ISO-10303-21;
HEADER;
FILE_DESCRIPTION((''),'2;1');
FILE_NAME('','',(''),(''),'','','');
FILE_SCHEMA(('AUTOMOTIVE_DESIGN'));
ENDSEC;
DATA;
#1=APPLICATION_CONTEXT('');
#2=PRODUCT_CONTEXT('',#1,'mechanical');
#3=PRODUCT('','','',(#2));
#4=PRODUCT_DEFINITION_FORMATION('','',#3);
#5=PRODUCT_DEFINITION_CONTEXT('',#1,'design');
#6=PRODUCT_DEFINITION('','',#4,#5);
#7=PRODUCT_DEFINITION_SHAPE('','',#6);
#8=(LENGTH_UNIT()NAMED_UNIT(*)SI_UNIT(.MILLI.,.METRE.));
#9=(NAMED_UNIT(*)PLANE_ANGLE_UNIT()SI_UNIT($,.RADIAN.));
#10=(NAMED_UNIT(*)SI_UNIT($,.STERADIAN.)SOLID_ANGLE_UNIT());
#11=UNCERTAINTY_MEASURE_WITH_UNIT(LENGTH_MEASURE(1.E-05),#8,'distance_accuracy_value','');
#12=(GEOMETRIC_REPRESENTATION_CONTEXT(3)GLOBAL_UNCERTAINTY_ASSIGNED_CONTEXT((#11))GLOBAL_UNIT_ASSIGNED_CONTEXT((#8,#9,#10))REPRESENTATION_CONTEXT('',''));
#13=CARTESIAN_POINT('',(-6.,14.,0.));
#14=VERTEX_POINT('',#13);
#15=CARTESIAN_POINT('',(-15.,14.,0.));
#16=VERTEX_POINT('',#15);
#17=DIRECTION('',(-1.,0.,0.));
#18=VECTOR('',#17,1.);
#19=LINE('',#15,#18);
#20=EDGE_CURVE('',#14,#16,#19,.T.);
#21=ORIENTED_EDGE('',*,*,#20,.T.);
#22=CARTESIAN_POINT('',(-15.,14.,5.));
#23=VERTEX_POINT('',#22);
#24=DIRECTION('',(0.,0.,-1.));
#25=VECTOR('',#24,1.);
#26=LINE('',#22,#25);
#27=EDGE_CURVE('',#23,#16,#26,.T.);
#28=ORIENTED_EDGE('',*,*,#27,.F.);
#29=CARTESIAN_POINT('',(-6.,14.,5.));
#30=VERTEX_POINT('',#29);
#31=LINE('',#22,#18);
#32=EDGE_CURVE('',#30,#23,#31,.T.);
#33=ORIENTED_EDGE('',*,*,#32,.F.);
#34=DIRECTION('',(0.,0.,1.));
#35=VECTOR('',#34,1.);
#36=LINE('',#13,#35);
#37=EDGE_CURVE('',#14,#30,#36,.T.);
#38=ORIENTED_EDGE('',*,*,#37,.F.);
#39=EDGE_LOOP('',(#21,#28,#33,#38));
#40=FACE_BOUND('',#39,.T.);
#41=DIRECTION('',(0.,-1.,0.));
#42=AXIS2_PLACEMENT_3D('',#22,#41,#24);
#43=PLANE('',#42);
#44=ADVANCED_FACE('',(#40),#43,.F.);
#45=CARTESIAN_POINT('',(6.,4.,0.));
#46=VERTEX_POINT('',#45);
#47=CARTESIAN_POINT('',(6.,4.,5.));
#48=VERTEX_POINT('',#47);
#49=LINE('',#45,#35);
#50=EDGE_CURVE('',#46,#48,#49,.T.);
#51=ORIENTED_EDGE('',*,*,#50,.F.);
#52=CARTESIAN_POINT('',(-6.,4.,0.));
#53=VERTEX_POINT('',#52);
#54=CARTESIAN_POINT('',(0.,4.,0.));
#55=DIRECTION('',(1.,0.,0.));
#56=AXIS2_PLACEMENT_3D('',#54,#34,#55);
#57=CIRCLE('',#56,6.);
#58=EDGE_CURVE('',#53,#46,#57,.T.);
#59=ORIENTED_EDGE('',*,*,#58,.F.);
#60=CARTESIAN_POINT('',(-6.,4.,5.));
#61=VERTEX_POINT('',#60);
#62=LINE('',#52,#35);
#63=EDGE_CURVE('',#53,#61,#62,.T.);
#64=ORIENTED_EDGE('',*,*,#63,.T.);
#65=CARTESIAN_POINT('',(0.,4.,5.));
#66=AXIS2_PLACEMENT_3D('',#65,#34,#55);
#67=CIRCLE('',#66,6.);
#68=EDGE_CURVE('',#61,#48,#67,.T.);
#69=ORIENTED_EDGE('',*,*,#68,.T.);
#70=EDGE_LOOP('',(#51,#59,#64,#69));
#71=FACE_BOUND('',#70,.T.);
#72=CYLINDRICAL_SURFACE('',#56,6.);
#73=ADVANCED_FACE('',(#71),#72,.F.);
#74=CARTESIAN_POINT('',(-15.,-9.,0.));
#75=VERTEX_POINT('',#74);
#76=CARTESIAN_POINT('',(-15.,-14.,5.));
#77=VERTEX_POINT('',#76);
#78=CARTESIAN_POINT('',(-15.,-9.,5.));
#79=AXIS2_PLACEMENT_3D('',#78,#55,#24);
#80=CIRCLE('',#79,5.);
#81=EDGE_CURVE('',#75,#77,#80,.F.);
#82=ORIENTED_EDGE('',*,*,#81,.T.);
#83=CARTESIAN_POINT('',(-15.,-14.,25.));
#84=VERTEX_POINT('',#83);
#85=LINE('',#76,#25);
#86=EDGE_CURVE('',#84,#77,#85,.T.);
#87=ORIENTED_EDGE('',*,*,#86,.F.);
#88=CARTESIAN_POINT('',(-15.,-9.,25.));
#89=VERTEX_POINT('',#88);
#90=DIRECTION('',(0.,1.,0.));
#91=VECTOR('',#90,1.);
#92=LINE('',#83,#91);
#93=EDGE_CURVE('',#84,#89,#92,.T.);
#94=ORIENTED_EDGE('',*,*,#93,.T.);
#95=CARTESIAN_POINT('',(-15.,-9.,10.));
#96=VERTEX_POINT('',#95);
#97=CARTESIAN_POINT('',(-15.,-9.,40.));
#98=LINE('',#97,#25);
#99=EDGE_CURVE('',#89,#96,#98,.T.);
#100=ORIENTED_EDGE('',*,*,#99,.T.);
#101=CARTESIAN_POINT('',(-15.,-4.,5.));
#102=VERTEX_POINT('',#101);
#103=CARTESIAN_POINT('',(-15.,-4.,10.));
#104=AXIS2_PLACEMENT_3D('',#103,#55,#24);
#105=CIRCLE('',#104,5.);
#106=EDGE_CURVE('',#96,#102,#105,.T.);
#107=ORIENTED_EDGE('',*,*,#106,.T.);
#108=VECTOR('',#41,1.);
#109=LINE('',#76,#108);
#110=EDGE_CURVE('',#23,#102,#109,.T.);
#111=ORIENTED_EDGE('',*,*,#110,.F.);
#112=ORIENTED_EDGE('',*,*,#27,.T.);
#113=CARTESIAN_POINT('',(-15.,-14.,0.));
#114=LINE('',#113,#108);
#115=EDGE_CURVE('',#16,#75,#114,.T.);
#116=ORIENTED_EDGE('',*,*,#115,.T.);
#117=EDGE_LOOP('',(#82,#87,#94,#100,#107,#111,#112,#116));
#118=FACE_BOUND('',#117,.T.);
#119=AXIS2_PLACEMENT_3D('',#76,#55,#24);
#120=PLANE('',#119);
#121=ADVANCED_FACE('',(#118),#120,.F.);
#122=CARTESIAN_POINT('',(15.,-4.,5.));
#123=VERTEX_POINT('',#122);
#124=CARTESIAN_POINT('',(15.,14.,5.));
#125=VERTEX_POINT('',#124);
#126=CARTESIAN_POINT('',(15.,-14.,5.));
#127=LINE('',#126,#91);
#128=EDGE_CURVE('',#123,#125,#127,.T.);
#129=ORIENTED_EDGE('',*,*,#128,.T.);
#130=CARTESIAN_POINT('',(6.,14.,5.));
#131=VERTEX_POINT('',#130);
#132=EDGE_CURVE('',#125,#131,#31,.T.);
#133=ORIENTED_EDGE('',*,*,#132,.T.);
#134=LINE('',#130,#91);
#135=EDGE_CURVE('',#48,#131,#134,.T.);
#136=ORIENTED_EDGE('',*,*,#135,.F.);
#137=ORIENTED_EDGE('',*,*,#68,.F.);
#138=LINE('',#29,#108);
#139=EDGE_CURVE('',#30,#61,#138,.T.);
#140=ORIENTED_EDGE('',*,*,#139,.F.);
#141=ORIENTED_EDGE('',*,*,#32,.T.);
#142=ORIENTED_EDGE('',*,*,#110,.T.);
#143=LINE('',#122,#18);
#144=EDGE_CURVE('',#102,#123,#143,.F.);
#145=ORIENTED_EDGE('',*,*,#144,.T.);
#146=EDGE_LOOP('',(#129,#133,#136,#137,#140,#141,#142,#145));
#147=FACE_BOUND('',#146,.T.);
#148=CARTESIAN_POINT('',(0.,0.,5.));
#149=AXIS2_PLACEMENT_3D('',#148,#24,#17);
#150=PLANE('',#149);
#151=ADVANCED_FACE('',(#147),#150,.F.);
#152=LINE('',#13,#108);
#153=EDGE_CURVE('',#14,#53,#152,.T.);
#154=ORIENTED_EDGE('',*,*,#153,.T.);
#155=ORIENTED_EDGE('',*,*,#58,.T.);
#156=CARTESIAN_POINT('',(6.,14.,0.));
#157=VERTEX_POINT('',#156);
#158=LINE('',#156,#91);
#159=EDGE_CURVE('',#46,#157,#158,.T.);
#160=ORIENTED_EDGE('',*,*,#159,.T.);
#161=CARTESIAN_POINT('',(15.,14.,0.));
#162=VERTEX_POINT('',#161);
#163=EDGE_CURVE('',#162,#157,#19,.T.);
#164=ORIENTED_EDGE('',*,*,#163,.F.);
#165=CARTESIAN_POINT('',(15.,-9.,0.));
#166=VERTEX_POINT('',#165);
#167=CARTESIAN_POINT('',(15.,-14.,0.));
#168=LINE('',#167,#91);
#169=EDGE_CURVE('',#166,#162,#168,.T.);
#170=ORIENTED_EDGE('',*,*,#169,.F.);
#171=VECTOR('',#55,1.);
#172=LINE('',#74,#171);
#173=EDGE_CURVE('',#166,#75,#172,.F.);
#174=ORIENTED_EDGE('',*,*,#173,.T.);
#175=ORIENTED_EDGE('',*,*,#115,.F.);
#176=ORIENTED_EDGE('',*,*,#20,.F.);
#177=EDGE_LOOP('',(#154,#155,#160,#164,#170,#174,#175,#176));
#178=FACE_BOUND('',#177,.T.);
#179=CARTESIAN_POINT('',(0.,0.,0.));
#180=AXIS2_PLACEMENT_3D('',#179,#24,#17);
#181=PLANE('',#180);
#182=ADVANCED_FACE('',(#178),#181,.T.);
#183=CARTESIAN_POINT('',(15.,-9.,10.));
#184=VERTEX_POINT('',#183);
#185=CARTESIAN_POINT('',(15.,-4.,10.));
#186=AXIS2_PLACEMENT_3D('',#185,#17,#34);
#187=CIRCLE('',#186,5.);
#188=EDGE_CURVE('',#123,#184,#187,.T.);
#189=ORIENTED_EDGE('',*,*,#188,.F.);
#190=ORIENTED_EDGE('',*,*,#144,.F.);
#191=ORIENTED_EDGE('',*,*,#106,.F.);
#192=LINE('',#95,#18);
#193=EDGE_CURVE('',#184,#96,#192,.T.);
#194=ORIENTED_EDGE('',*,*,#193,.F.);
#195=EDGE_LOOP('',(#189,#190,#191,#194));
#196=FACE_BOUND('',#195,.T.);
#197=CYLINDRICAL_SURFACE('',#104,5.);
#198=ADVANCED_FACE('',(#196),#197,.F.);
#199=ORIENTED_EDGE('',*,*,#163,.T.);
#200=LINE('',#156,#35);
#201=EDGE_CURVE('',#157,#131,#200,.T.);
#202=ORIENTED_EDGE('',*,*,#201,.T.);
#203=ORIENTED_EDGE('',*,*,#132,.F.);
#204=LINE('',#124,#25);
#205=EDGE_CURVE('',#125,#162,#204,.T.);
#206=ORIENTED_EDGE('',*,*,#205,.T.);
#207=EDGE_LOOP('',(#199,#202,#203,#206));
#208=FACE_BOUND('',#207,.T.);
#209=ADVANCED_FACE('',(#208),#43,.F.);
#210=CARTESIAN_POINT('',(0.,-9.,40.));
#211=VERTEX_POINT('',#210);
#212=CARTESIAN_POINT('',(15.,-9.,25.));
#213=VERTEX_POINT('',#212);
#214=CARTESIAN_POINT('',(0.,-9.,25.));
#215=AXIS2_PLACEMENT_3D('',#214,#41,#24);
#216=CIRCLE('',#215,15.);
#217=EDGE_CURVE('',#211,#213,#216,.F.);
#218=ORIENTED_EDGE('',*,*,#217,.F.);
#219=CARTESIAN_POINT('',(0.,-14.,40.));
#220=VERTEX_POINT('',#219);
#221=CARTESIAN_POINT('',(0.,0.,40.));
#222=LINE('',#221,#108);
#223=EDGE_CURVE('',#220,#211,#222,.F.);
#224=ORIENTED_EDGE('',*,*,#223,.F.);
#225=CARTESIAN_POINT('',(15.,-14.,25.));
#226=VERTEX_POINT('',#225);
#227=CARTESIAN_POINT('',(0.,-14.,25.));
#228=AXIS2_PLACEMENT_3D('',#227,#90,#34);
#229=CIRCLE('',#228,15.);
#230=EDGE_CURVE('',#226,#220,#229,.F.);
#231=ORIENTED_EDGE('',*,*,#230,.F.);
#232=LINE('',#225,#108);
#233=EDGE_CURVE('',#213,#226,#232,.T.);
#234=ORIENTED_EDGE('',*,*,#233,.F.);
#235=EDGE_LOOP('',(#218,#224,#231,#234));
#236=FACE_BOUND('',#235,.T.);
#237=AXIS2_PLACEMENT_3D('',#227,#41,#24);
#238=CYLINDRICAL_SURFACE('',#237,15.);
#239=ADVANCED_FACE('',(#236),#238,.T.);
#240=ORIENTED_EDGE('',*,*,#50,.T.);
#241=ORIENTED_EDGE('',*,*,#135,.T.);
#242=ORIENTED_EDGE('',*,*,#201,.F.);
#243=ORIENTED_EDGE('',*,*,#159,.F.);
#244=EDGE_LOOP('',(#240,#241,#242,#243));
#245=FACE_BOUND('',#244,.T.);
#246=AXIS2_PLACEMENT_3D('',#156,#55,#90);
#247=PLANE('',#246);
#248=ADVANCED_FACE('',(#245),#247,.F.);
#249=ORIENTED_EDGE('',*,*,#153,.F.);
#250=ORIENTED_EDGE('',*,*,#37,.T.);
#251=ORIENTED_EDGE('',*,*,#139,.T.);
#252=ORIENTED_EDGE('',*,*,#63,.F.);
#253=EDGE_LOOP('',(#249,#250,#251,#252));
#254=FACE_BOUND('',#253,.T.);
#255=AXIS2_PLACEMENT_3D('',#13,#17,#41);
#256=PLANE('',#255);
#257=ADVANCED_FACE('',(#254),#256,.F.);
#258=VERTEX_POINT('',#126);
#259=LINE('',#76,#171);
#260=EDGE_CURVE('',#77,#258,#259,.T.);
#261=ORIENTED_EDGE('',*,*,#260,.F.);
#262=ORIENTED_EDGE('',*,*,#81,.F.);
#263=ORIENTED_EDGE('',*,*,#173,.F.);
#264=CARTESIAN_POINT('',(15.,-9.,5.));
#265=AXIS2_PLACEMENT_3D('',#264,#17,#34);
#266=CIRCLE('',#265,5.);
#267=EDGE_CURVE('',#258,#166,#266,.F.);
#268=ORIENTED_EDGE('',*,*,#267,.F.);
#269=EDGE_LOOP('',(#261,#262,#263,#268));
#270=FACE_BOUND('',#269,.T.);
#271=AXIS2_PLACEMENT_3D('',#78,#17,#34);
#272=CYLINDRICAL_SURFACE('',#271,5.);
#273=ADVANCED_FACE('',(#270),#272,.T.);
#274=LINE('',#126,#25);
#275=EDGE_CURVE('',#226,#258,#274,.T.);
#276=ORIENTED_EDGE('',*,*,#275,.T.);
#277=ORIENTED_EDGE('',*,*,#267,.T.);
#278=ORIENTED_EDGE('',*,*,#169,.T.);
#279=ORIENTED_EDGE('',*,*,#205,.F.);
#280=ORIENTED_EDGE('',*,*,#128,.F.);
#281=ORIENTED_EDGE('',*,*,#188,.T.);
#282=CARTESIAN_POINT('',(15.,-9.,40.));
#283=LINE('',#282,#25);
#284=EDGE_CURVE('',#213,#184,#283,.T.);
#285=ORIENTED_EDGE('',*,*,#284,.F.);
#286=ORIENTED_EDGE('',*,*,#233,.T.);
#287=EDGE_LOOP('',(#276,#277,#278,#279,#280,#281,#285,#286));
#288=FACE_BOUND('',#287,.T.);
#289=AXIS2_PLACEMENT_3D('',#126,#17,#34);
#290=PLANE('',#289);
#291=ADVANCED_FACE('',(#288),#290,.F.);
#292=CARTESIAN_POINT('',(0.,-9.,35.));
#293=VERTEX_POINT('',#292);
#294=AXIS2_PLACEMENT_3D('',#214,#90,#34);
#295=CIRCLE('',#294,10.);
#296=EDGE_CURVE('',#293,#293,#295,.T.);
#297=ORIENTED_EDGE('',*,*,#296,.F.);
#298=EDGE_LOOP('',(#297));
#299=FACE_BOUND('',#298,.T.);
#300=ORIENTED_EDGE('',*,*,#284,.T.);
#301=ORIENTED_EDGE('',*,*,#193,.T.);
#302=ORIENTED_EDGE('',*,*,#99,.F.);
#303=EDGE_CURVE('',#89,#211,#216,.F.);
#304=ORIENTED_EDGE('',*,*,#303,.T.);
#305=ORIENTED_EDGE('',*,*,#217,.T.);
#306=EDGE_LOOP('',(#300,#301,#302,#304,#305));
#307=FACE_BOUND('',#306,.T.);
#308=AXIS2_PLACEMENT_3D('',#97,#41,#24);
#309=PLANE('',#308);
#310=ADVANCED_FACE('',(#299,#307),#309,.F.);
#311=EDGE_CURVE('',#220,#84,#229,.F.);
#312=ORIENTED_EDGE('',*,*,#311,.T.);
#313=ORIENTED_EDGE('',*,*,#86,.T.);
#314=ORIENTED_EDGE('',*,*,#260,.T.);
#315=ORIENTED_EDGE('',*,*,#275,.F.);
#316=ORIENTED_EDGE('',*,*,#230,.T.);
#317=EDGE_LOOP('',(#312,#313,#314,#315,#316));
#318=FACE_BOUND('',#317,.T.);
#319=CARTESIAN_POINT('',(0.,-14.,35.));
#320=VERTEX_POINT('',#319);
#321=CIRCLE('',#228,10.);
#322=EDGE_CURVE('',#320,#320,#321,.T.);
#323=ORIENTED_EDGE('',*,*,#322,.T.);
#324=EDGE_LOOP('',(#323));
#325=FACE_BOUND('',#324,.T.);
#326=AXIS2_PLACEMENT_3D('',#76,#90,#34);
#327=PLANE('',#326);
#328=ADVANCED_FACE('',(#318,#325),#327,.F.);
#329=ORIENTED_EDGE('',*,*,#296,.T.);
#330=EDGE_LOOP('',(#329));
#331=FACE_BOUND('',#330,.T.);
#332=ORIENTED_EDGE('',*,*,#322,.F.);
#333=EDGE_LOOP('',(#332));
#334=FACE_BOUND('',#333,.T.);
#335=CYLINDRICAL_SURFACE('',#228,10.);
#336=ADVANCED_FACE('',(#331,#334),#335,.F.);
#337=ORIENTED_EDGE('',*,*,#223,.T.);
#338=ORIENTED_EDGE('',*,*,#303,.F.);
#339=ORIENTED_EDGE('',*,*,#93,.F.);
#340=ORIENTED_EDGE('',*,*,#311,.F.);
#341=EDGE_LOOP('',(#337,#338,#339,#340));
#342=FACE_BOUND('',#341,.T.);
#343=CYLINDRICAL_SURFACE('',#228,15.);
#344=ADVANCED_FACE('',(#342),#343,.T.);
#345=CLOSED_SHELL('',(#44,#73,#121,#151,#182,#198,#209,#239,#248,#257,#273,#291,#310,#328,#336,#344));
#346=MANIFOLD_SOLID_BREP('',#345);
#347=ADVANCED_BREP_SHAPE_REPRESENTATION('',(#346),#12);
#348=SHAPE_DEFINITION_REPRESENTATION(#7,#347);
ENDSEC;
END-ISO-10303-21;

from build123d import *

# Parameters (mm, degrees)
SKETCH_1_W          = 30
SKETCH_1_H          = 28
EXTRUDE_1_DEPTH     = 5
CUT_EXTRUDE_1_DEPTH = 22.118712082
SKETCH_3_W          = 30
SKETCH_3_H          = 5
EXTRUDE_2_DEPTH     = 35
FILLET_1_R          = 5
FILLET_2_R          = 15
FILLET_3_R          = 15
SKETCH_4_R          = 10
CUT_EXTRUDE_2_DEPTH = 49.518037883
FILLET_5_R          = 5


with BuildPart() as part:
    # Эскиз1 → Бобышка-Вытянуть1 (new body)
    with BuildSketch(Plane.XY):
        Rectangle(SKETCH_1_W, SKETCH_1_H)
    extrude(amount=EXTRUDE_1_DEPTH)

    # Эскиз2 → Вырез-Вытянуть1 (cut, through all)
    with BuildSketch(Plane.XY.offset(5)):
        with BuildLine():
            Line((-6, 14), (6, 14))
            Line((6, 14), (6, 4))
            ThreePointArc((6, 4), (0, -2), (-6, 4))
            Line((-6, 4), (-6, 14))
        make_face()
    extrude(amount=-CUT_EXTRUDE_1_DEPTH, mode=Mode.SUBTRACT)

    # Эскиз3 → Бобышка-Вытянуть2 (add)
    with BuildSketch(Plane.XY.offset(5)):
        with Locations((0, -11.5)):
            Rectangle(SKETCH_3_W, SKETCH_3_H)
    extrude(amount=EXTRUDE_2_DEPTH)

    # Скругление1
    fillet_1_edges = [part.edges().sort_by_distance(p)[0] for p in [
        (0, -14, 0),
    ]]
    fillet(fillet_1_edges, radius=FILLET_1_R)

    # Скругление2
    fillet_2_edges = [part.edges().sort_by_distance(p)[0] for p in [
        (15, -11.5, 40),
    ]]
    fillet(fillet_2_edges, radius=FILLET_2_R)

    # Скругление3
    fillet_3_edges = [part.edges().sort_by_distance(p)[0] for p in [
        (-15, -11.5, 40),
    ]]
    fillet(fillet_3_edges, radius=FILLET_3_R - 0.0001)  # a hair under: the kernel refuses the full size

    # Эскиз4 → Вырез-Вытянуть2 (cut, through all)
    with BuildSketch(Plane(origin=(0, -9, 0), x_dir=(1, 0, 0), z_dir=(0, 1, 0))):
        with Locations(Location((0, -25, 0), (0, 0, 270))):
            Circle(SKETCH_4_R)
    extrude(amount=-CUT_EXTRUDE_2_DEPTH, mode=Mode.SUBTRACT)

    # Скругление5
    fillet_5_edges = [part.edges().sort_by_distance(p)[0] for p in [
        (0, -9, 5),
    ]]
    fillet(fillet_5_edges, radius=FILLET_5_R)


solid = part.part
